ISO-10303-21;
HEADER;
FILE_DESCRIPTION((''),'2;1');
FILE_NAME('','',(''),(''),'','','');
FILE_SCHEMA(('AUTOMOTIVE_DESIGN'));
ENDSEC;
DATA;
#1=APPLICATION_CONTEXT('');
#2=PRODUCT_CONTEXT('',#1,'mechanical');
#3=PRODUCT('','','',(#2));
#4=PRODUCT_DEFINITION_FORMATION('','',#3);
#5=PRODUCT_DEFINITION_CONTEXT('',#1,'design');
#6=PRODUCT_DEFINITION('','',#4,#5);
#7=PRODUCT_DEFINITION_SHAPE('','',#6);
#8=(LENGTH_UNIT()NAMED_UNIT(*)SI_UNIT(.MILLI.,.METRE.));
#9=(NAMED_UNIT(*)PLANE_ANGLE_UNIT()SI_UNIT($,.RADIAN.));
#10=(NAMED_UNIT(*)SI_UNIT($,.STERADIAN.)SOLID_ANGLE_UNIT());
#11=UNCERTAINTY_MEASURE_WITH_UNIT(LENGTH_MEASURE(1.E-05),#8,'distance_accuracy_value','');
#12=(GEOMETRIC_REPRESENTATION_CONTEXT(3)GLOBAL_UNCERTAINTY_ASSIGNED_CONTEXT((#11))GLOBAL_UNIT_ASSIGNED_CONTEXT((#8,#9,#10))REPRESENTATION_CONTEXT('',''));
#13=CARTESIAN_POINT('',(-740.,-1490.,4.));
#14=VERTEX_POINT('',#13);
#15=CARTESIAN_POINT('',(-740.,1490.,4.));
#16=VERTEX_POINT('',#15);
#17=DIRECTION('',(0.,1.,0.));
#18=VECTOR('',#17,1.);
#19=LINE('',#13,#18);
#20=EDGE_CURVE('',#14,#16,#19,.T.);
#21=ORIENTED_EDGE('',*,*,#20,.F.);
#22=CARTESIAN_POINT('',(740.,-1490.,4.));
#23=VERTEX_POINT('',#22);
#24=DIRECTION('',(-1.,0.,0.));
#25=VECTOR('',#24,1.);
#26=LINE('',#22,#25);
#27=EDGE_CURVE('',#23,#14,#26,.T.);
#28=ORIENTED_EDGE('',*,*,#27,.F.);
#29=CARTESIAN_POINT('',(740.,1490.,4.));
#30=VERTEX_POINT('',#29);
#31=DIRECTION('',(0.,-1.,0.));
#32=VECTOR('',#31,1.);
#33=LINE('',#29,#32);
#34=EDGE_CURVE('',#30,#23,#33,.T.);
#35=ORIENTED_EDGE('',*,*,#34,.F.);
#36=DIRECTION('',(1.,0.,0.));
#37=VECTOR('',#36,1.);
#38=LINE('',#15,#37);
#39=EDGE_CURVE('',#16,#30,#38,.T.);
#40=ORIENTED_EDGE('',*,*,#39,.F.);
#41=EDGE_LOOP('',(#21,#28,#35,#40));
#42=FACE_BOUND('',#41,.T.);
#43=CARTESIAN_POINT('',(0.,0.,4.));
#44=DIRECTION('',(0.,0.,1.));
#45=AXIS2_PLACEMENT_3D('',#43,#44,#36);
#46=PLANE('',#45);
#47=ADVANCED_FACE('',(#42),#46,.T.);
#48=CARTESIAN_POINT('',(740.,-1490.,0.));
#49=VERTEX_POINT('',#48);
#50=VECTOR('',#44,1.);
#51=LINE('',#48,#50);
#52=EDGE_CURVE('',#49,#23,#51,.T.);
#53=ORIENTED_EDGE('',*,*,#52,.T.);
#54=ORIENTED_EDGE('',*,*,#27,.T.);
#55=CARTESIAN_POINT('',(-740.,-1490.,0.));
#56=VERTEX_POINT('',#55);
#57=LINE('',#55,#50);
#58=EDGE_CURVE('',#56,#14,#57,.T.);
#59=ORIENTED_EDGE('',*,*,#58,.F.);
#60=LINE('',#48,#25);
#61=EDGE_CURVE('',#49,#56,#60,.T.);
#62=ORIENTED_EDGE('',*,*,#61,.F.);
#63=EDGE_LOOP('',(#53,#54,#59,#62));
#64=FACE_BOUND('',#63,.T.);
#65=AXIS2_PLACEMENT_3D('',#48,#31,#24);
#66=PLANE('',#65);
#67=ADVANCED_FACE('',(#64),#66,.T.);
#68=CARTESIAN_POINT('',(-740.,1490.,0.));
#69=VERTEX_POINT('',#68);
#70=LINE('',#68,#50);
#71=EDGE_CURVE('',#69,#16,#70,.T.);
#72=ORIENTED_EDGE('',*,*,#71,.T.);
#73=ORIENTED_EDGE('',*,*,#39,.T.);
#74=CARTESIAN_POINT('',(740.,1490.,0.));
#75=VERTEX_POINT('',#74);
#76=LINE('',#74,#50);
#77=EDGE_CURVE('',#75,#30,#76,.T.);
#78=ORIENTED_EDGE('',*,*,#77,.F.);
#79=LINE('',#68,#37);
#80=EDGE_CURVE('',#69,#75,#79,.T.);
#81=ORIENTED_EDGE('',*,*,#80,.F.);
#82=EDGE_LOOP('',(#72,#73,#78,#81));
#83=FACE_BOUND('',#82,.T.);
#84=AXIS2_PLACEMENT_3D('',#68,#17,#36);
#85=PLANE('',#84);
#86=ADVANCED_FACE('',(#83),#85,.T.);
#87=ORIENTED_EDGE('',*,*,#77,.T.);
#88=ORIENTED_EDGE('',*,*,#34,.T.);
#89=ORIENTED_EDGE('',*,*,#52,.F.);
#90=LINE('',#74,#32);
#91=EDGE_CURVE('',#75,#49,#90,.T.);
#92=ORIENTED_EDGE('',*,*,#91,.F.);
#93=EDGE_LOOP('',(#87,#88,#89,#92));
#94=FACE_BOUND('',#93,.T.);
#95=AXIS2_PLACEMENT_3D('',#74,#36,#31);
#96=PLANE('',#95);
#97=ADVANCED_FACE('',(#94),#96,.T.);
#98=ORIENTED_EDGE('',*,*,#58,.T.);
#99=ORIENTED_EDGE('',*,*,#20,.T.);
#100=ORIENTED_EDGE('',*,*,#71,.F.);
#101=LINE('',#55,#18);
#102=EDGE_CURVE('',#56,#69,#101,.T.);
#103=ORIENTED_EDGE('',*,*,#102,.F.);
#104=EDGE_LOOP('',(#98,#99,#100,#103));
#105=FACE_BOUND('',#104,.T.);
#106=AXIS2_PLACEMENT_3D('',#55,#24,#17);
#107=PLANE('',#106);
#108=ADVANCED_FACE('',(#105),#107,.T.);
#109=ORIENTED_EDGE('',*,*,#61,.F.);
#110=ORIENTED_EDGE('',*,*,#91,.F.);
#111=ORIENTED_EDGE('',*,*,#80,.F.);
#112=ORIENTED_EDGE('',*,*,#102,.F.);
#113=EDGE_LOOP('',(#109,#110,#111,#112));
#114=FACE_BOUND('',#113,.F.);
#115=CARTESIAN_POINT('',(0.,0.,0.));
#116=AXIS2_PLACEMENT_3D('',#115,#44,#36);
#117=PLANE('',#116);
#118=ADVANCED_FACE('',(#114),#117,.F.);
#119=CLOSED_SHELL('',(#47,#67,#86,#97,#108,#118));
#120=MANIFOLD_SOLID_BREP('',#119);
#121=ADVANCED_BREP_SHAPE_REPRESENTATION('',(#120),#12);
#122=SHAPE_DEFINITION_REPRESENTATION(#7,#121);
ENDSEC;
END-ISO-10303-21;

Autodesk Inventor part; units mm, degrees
ref_plane "YZ Plane" through (0, 0, 0) normal (1, 0, 0) x (0, 1, 0)
ref_plane "XZ Plane" through (0, 0, 0) normal (0, 1, 0) x (-1, 0, 0)
ref_plane "XY Plane" through (0, 0, 0) normal (0, 0, 1) x (1, 0, 0)
sketch "Sketch1" plane through (0, 0, 0) normal (0, 0, 1) x (1, 0, 0)
  line L0 (740, -1490) -> (-740, -1490)
  line L1 (-740, -1490) -> (-740, 1490)
  line L2 (-740, 1490) -> (740, 1490)
  line L3 (740, 1490) -> (740, -1490)
  line L4 (740, -1490) -> (-740, 1490) construction
  line L5 (-740, -1490) -> (740, 1490) construction
  point P0 (0, 0)
  dimension "d0" = 1480
  dimension "d1" = 2980
extrude "Plate1" add sketch "Sketch1" along normal blind 4
sketch "Sketch2" plane through (0, 0, 0) normal (0, 0, -1) x (-1, 0, 0)
  line L0 (512.6266, -1291.8213) -> (512.6266, -1649.5118) construction
  line L1 (512.6266, -1649.5118) -> (521.7001, -1649.5118) construction
  line L2 (521.7001, -1649.5118) -> (521.7001, -1291.8213) construction
  line L3 (521.7001, -1291.8213) -> (512.6266, -1291.8213) construction
  point P0 (0, 0)
mark "Mark1"
sketch "Эскиз3" plane through (0, 0, 0) normal (0, 0, -1) x (-1, 0, 0)
  line L0 (710, -1234.5) -> (770, -1234.5) projected
  line L1 (710, -1234.5) -> (710, -1230.5) projected
  line L2 (710, -737.8333) -> (770, -737.8333) projected
  line L3 (710, -737.8333) -> (710, -733.8333) projected
  line L4 (710, -241.1667) -> (770, -241.1667) projected
  line L5 (710, -241.1667) -> (710, -237.1667) projected
  line L6 (710, 255.5) -> (770, 255.5) projected
  line L7 (710, 255.5) -> (710, 259.5) projected
  line L8 (710, 752.1667) -> (770, 752.1667) projected
  line L9 (710, 752.1667) -> (710, 756.1667) projected
  line L10 (710, 1248.8333) -> (770, 1248.8333) projected
  line L11 (710, 1248.8333) -> (710, 1252.8333) projected
  line L12 (669.8628, -1238) -> (669.8628, -1335) projected
  line L13 (669.8628, -1335) -> (665.8638, -1335) projected
  line L14 (169.7342, -1238) -> (169.7342, -1335) projected
  line L15 (169.7342, -1335) -> (165.7352, -1335) projected
  line L16 (-330.3944, -1238) -> (-330.3944, -1335) projected
  line L17 (-330.3944, -1335) -> (-334.3934, -1335) projected
  ellipse E0 centre (669.8628, 1490.5) end of major axis (669.8628, 1520.5) minor radius 0.6803 (669.8628, 1460.5) -> (669.8628, 1520.5) ccw projected
  line L18 (669.8628, 1460.5) -> (665.8638, 1460.5) projected
  line L19 (-738.6395, 1248.8333) -> (-680, 1248.8333) projected
  line L20 (-680, 1248.8333) -> (-680, 1252.8333) projected
  line L21 (-738.6395, 752.1667) -> (-680, 752.1667) projected
  line L22 (-680, 752.1667) -> (-680, 756.1667) projected
  line L23 (-738.6395, 255.5) -> (-680, 255.5) projected
  line L24 (-680, 255.5) -> (-680, 259.5) projected
  line L25 (-738.6395, -241.1667) -> (-680, -241.1667) projected
  line L26 (-680, -241.1667) -> (-680, -237.1667) projected
  line L27 (-738.6395, -737.8333) -> (-680, -737.8333) projected
  line L28 (-680, -737.8333) -> (-680, -733.8333) projected
  line L29 (-738.6395, -1234.5) -> (-680, -1234.5) projected
  line L30 (-680, -1234.5) -> (-680, -1230.5) projected
  ellipse E1 centre (169.7342, 1490.5) end of major axis (169.7342, 1520.5) minor radius 0.6803 (169.7342, 1460.5) -> (169.7342, 1520.5) ccw projected
  line L31 (169.7342, 1460.5) -> (165.7352, 1460.5) projected
  ellipse E2 centre (-330.3944, 1490.5) end of major axis (-330.3944, 1520.5) minor radius 0.6803 (-330.3944, 1460.5) -> (-330.3944, 1520.5) ccw projected
  line L32 (-330.3944, 1460.5) -> (-334.3934, 1460.5) projected
  point P0 (0, 0)
mark "Маркировка2"
equation "\"d0\" = Лист_ширина"
equation "\"d2\" = Thickness"
equation "\"BendRadius\" = Thickness"
equation "\"BendReliefWidth\" = Thickness"
equation "\"BendReliefDepth\" = 0.5 * Thickness"
equation "\"CornerReliefSize\" = 4 * Thickness"
equation "\"MinimumRemnant\" = 2 * Thickness"
equation "\"TransitionRadius\" = BendRadius"
equation "\"JacobiRadiusSize\" = BendRadius"
equation "\"GapSize\" = Thickness"
equation "\"Лист_ширина\" = 1480"
equation "\"Thickness\" = 4"
properties part number "GBK 2122 shield 2" material "Steel"
